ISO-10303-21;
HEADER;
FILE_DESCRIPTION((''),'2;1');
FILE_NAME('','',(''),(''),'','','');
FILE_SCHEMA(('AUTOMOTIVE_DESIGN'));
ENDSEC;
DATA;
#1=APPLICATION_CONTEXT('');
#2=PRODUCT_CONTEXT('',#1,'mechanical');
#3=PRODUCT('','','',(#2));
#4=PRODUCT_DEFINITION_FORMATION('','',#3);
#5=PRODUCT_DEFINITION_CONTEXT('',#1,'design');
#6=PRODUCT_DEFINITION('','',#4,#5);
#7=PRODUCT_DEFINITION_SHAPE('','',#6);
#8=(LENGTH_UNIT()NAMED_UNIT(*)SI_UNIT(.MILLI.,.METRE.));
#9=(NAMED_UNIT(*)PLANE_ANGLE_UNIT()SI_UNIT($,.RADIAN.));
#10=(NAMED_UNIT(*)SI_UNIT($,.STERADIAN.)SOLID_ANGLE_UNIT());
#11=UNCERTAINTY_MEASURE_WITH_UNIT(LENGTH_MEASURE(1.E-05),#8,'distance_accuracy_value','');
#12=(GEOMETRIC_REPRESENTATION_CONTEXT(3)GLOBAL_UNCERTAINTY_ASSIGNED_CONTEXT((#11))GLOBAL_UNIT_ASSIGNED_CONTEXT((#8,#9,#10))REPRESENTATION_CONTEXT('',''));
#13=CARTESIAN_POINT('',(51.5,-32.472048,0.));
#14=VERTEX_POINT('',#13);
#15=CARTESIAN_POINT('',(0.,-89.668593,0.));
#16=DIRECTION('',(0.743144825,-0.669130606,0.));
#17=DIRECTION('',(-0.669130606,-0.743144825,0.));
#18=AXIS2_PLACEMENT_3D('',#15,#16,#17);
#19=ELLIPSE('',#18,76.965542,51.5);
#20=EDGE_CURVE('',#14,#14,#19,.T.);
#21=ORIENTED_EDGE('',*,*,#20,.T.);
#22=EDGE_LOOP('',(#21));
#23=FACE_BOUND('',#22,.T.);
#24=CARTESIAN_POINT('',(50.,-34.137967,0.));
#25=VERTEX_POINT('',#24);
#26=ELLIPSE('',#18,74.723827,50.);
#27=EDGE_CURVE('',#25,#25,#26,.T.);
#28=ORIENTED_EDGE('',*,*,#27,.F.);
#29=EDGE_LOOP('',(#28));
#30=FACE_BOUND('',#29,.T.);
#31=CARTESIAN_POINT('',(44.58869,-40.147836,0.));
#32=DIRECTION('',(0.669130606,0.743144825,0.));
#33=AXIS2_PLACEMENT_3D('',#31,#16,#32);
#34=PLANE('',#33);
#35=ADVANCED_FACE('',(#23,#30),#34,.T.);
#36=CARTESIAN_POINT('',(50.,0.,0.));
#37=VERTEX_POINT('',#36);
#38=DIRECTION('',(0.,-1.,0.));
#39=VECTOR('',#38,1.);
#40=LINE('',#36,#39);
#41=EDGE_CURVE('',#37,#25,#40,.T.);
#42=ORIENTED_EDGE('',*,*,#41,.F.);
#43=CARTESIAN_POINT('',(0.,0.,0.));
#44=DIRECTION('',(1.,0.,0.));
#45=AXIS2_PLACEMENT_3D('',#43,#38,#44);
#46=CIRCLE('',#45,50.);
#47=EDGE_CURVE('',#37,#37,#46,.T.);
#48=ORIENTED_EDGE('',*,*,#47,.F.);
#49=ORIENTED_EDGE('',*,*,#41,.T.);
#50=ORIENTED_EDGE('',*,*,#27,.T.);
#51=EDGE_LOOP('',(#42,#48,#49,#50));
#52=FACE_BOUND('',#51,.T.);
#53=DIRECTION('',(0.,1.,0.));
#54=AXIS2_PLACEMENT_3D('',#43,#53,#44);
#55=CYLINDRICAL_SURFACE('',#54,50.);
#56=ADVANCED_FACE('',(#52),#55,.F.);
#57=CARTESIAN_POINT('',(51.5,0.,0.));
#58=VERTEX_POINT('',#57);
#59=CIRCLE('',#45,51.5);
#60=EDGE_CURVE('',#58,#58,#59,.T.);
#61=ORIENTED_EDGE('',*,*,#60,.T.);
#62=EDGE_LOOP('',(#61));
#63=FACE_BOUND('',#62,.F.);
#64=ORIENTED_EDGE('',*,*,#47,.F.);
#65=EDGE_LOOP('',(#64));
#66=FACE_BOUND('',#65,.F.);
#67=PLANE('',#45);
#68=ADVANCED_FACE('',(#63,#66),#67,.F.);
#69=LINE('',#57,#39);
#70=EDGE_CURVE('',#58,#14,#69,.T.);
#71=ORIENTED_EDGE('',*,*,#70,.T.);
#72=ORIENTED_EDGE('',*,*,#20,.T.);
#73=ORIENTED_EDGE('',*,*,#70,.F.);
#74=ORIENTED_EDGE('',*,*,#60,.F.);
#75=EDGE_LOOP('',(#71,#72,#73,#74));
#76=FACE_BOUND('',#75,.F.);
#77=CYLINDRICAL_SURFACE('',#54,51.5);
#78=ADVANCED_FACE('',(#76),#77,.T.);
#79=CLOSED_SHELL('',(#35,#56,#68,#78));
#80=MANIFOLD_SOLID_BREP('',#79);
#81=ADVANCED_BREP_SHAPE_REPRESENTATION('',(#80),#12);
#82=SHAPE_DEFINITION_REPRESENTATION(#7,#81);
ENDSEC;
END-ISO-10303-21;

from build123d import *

# Parameters (mm, degrees)
F0_R        = 51.5
F0_R_2      = 50
F1_DEPTH    = 160
F1_FACE_R   = 51.5
F1_FACE_R_2 = 50
F4_REACH    = 273.1919484463


with BuildPart() as f1:
    # F0 (on Front) → F1 (new body)
    with BuildSketch(Plane.XZ):
        Circle(F0_R)
        Circle(F0_R_2, mode=Mode.SUBTRACT)
    extrude(amount=F1_DEPTH)

    f4_end = Plane(origin=(44.5886895286, -40.1478363815, 0), x_dir=(0.6691306064, 0.7431448255, 0), z_dir=(0.7431448255, -0.6691306064, 0))
    # F1_face (on face) → F4 (cut, up to a plane its end follows)
    with BuildSketch(Plane.XZ.offset(160)):
        Circle(F1_FACE_R)
        Circle(F1_FACE_R_2, mode=Mode.SUBTRACT)
    f4_long = extrude(amount=-F4_REACH, mode=Mode.PRIVATE)
    add(split(f4_long, bisect_by=f4_end, keep=Keep.TOP, mode=Mode.PRIVATE), mode=Mode.SUBTRACT)


solid = f1.part
